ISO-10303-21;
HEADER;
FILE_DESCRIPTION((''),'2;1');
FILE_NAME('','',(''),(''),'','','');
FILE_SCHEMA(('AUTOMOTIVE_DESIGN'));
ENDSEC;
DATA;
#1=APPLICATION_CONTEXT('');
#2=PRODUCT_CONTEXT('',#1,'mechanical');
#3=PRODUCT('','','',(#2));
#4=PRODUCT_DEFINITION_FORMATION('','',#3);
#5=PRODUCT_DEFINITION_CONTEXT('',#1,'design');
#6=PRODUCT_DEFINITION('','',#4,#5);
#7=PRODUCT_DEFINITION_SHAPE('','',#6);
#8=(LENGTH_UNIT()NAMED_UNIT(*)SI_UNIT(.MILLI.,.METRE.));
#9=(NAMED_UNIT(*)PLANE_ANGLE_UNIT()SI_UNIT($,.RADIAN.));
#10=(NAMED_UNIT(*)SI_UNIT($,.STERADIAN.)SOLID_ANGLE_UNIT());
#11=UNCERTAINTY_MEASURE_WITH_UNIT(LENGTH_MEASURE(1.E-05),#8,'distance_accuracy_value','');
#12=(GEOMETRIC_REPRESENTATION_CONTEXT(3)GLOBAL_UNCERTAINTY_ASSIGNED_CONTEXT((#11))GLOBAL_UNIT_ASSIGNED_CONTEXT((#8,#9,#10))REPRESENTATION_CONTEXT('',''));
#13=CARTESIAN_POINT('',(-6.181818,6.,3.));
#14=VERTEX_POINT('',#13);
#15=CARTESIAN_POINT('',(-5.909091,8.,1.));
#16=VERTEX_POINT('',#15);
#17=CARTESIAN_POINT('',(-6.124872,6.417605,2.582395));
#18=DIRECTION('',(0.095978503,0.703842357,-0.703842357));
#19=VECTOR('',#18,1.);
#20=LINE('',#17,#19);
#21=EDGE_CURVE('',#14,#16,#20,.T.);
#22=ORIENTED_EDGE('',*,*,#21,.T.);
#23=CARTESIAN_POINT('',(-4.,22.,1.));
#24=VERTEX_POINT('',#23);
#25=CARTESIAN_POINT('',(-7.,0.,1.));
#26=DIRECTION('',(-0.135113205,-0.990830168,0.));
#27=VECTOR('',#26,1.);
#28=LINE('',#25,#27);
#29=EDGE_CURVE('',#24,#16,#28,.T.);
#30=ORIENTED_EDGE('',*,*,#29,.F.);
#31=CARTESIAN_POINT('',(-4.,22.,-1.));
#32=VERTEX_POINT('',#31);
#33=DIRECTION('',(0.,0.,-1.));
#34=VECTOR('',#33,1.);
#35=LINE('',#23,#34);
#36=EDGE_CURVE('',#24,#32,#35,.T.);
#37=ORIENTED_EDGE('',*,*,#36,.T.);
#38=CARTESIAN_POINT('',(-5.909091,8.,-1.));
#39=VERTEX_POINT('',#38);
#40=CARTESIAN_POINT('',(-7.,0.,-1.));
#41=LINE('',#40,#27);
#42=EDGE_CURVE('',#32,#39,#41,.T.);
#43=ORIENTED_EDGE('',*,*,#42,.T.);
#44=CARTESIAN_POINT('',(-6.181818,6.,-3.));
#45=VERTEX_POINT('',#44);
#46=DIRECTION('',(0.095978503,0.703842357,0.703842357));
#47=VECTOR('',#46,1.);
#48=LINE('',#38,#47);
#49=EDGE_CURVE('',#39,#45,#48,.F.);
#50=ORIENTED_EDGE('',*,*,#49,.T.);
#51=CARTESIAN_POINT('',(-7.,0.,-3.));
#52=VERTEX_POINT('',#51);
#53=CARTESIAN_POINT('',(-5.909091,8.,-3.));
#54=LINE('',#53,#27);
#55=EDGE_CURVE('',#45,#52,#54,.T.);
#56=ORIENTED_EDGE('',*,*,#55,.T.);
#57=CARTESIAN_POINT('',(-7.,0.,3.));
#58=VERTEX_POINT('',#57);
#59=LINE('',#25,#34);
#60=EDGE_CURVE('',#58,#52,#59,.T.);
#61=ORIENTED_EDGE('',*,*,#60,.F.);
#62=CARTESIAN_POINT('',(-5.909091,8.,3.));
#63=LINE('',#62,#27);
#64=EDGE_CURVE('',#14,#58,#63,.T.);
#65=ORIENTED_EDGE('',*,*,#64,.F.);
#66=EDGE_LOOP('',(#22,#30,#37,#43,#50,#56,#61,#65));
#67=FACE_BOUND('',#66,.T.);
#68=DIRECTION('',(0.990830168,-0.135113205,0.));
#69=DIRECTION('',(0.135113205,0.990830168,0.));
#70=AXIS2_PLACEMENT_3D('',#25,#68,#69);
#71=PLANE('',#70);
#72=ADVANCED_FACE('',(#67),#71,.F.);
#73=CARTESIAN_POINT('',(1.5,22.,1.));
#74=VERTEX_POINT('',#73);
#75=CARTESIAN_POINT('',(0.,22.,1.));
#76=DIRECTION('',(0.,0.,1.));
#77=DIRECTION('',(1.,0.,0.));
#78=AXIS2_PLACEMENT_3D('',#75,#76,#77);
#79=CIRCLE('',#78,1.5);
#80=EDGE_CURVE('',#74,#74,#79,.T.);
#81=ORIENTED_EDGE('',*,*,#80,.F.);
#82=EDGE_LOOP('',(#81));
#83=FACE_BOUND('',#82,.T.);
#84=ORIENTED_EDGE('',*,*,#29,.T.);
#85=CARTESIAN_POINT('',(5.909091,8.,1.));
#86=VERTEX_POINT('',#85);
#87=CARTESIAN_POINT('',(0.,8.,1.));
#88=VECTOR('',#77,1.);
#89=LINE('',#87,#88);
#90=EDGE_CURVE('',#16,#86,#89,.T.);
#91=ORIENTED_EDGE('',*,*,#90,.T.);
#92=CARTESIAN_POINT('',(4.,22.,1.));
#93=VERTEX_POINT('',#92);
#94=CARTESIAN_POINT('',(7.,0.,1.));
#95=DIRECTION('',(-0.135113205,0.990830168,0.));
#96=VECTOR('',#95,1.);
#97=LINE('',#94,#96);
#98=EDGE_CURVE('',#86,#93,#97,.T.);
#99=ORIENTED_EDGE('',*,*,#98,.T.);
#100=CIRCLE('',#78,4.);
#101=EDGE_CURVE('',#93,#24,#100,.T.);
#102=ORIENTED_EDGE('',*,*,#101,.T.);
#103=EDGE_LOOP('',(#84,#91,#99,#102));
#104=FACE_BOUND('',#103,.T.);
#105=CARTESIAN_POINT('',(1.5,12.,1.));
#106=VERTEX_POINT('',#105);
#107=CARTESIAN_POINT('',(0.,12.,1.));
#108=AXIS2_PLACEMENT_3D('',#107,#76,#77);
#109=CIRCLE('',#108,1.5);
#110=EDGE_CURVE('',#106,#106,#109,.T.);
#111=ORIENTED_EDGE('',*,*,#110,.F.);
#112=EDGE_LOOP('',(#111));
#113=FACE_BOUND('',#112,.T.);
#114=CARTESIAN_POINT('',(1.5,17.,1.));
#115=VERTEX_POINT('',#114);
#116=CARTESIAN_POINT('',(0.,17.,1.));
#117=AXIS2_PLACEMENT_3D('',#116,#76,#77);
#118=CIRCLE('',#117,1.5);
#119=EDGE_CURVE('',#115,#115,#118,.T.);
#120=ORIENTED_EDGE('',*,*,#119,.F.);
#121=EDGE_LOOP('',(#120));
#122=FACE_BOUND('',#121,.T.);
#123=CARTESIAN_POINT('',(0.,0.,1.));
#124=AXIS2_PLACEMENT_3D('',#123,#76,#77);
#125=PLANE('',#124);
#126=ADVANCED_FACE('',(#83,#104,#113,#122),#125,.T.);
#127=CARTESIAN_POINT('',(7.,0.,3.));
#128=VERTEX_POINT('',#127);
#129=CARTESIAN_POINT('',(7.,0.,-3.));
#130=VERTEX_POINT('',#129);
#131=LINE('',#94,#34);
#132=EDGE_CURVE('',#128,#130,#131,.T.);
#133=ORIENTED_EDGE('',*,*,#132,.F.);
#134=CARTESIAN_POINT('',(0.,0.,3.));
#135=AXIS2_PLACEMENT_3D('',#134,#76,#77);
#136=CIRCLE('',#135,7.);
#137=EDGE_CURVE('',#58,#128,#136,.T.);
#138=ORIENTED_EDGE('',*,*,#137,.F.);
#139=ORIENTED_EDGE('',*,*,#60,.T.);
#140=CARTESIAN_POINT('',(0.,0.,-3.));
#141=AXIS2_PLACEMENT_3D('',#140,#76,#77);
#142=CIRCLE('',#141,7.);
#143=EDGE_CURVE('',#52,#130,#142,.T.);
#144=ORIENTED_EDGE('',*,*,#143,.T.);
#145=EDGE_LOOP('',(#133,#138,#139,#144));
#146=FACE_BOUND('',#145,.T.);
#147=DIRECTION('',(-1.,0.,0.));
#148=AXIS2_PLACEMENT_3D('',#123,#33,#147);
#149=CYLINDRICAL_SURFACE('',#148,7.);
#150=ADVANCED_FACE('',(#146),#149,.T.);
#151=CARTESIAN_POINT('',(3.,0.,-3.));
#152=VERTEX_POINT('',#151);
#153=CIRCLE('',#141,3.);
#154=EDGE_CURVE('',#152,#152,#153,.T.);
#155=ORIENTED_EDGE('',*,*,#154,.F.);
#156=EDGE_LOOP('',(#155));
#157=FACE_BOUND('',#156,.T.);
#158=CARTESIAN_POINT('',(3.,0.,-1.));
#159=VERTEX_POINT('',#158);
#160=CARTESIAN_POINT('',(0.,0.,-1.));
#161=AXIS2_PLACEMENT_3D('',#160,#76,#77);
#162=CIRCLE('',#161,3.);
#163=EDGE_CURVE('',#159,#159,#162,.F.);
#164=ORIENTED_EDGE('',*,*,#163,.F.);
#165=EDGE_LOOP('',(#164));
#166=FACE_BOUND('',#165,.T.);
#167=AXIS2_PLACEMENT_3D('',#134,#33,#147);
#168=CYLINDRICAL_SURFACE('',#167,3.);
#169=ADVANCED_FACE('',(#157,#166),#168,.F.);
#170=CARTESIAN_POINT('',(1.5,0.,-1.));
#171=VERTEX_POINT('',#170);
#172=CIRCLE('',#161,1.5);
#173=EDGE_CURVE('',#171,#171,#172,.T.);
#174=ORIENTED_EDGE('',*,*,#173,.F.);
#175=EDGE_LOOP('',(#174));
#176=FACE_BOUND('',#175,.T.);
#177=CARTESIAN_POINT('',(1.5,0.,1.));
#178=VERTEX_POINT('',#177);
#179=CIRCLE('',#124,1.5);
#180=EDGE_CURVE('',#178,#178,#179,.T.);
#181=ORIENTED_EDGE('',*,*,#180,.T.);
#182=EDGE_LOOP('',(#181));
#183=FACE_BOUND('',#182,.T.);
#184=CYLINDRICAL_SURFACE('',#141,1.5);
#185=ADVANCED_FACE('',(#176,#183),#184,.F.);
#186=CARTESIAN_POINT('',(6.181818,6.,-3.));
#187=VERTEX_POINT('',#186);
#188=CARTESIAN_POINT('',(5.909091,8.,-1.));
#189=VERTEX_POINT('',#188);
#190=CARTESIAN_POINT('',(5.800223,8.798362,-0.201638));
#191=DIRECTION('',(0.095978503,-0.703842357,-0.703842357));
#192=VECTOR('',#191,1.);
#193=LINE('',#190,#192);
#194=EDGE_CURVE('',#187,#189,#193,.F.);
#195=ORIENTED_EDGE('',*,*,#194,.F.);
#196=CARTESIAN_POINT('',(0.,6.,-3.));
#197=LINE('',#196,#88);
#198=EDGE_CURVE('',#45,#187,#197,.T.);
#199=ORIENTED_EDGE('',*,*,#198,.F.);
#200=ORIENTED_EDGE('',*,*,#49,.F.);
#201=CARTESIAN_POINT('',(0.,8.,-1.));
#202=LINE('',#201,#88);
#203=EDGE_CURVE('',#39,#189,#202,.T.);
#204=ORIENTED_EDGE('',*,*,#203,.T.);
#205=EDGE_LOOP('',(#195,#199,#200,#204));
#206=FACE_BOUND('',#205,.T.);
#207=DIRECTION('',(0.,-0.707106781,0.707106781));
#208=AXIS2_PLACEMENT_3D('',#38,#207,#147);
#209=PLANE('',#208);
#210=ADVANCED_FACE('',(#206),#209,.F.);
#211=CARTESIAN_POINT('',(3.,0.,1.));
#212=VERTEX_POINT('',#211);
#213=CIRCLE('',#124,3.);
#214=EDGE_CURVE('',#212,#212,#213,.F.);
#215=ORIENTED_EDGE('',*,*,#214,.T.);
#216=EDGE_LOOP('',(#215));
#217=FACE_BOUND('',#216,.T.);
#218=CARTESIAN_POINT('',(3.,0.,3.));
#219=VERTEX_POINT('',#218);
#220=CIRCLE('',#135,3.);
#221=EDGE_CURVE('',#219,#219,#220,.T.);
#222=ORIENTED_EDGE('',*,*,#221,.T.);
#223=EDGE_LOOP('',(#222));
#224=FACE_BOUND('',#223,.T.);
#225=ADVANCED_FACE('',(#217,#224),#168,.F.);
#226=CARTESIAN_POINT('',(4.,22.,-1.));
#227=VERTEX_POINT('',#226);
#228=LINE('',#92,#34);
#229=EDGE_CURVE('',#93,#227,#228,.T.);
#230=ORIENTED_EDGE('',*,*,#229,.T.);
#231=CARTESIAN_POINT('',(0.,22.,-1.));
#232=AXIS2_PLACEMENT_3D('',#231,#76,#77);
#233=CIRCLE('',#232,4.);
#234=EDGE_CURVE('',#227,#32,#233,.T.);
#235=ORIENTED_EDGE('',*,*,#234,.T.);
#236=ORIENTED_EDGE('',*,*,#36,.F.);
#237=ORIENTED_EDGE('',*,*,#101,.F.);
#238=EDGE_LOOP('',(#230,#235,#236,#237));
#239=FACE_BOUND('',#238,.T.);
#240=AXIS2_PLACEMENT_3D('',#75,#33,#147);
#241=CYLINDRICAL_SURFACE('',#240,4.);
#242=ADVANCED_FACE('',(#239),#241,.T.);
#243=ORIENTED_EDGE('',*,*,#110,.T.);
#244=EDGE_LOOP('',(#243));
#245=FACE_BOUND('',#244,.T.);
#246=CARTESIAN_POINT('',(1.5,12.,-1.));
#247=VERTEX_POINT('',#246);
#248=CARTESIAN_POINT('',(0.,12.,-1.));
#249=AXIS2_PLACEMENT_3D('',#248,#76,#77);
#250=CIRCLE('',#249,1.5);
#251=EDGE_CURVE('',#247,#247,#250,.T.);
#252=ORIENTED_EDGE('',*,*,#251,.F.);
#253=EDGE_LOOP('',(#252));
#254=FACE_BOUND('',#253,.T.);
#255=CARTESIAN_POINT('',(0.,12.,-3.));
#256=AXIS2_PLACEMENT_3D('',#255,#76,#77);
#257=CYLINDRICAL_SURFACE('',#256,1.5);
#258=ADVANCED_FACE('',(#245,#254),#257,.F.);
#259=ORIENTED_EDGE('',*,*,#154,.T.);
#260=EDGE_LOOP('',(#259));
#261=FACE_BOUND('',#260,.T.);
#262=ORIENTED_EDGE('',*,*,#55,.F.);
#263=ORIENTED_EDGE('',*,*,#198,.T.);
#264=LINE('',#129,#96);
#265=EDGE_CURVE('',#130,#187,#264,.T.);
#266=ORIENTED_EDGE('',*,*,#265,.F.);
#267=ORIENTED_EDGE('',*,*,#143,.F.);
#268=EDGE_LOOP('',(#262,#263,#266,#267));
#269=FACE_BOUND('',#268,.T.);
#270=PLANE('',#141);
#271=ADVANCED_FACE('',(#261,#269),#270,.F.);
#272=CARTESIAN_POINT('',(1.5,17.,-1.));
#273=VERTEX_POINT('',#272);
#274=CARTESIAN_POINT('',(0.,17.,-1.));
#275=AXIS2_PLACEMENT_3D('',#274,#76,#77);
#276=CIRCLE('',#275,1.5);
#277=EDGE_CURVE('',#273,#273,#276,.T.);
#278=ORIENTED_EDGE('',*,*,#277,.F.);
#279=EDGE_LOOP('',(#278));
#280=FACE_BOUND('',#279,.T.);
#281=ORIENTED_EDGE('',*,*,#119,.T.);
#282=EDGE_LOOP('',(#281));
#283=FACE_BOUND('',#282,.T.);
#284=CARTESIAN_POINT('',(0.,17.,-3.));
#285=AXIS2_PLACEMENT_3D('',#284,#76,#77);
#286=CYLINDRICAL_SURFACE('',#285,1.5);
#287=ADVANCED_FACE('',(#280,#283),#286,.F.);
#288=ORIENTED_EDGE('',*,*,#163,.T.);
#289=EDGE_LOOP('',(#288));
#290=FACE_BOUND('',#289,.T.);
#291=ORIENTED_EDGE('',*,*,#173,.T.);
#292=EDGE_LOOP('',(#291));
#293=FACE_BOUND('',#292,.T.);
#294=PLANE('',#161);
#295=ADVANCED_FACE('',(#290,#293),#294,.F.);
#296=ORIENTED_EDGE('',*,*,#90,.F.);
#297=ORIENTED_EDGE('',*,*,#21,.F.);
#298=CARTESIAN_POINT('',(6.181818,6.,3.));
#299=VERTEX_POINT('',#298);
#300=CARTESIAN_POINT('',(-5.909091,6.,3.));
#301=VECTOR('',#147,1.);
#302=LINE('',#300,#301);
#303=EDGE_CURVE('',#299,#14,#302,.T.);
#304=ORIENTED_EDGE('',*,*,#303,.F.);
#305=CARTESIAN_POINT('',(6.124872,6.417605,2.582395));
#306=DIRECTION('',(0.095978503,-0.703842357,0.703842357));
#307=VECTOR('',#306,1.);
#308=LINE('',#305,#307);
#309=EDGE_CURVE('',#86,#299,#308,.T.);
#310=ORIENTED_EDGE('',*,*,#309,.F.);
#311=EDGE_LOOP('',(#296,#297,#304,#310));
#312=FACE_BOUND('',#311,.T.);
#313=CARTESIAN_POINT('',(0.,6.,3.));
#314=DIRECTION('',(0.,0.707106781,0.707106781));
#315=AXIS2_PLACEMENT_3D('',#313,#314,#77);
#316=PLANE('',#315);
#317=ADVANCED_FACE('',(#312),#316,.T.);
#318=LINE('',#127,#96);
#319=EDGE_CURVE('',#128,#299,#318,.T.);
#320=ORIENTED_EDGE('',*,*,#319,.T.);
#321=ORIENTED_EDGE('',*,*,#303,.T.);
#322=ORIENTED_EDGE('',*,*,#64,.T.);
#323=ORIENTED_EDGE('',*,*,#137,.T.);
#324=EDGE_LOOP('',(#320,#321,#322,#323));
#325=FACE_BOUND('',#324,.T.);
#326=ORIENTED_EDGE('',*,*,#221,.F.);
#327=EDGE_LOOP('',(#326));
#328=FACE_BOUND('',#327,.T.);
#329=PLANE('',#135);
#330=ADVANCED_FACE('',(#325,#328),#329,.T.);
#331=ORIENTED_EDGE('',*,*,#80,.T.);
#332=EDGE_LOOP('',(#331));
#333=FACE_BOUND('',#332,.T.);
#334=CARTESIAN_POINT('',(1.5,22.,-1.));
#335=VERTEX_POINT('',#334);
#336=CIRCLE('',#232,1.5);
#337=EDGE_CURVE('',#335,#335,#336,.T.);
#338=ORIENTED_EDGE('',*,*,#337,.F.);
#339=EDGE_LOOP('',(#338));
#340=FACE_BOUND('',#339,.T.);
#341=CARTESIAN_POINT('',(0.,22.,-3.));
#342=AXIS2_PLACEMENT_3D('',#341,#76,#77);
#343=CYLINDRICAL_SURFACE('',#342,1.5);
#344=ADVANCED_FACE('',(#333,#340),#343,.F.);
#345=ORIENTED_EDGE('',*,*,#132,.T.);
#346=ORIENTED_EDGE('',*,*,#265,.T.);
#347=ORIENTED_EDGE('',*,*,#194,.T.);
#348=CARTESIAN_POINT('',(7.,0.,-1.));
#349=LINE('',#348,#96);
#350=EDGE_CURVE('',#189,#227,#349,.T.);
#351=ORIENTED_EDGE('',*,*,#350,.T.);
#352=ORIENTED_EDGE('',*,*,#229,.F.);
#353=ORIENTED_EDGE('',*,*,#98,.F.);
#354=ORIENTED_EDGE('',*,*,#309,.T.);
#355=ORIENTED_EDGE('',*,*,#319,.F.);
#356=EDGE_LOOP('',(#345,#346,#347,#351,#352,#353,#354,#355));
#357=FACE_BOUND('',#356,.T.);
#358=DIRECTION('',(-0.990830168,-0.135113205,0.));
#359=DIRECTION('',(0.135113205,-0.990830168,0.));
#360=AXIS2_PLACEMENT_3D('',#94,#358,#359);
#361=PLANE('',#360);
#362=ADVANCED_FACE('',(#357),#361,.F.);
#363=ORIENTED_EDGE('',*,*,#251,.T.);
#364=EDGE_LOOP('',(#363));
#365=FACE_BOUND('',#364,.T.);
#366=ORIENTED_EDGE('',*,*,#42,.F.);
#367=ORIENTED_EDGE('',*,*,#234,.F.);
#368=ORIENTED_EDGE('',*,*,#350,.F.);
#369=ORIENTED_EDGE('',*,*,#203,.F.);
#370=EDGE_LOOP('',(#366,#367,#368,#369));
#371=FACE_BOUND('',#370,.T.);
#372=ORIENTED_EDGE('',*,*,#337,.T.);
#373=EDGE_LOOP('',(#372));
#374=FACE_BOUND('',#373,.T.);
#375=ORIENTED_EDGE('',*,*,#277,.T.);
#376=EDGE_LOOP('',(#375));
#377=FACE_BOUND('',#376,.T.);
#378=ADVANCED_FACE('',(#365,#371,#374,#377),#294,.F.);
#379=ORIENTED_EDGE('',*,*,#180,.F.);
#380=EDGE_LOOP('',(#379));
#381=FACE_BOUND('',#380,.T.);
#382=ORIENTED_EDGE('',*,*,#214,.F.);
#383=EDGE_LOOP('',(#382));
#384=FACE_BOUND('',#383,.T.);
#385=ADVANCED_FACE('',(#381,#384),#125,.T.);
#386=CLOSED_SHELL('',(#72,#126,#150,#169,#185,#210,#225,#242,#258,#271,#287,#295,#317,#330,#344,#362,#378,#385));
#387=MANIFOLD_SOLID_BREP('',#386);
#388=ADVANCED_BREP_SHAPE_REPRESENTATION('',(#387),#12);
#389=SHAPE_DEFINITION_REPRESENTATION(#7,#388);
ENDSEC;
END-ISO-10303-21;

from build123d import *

# Parameters (mm, degrees)
BOSS_EXTRUDE1_DEPTH = 1
SKETCH2_R           = 3
BOSS_EXTRUDE2_DEPTH = 3
CHAMFER1_SIZE       = 2
SKETCH3_R           = 1.5
CUT_EXTRUDE1_DEPTH  = 28.221315178
SKETCH4_R           = 1.5
CUT_EXTRUDE2_DEPTH  = 28.221315178


with BuildPart() as part:
    # Sketch1 → Boss-Extrude1 (new, symmetric)
    with BuildSketch(Plane.XY):
        with BuildLine():
            Line((-7, 0), (-4, 22))
            ThreePointArc((-4, 22), (0, 26), (4, 22))
            Line((4, 22), (7, 0))
            ThreePointArc((7, 0), (0, -7), (-7, 0))
        make_face()
    extrude(amount=BOSS_EXTRUDE1_DEPTH, both=True)

    # Sketch2 → Boss-Extrude2 (add, symmetric)
    with BuildSketch(Plane.XY):
        with BuildLine():
            Line((-5.909090909, 8), (5.909090909, 8))
            Line((5.909090909, 8), (7, 0))
            ThreePointArc((7, 0), (0, -7), (-7, 0))
            Line((-7, 0), (-5.909090909, 8))
        make_face()
        Circle(SKETCH2_R, mode=Mode.SUBTRACT)
    extrude(amount=BOSS_EXTRUDE2_DEPTH, both=True)

    # Chamfer1
    chamfer1_edges = [part.edges().sort_by_distance(p)[0] for p in [
        (0, 8, -3),
        (0, 8, 3),
    ]]
    chamfer(chamfer1_edges, length=CHAMFER1_SIZE - 0.0001)  # a hair under: the kernel refuses the full size

    # Sketch3 → Cut-Extrude1 (cut, through all)
    with BuildSketch(Plane.XY.offset(1)):
        with Locations((0, 22)):
            Circle(SKETCH3_R)
        with Locations((0, 17)):
            Circle(SKETCH3_R)
        with Locations((0, 12)):
            Circle(SKETCH3_R)
    extrude(amount=-CUT_EXTRUDE1_DEPTH, mode=Mode.SUBTRACT)

    # Sketch4 → Cut-Extrude2 (cut, through all)
    with BuildSketch(Plane.XY.offset(1)):
        Circle(SKETCH4_R)
    extrude(amount=-CUT_EXTRUDE2_DEPTH, mode=Mode.SUBTRACT)


solid = part.part
